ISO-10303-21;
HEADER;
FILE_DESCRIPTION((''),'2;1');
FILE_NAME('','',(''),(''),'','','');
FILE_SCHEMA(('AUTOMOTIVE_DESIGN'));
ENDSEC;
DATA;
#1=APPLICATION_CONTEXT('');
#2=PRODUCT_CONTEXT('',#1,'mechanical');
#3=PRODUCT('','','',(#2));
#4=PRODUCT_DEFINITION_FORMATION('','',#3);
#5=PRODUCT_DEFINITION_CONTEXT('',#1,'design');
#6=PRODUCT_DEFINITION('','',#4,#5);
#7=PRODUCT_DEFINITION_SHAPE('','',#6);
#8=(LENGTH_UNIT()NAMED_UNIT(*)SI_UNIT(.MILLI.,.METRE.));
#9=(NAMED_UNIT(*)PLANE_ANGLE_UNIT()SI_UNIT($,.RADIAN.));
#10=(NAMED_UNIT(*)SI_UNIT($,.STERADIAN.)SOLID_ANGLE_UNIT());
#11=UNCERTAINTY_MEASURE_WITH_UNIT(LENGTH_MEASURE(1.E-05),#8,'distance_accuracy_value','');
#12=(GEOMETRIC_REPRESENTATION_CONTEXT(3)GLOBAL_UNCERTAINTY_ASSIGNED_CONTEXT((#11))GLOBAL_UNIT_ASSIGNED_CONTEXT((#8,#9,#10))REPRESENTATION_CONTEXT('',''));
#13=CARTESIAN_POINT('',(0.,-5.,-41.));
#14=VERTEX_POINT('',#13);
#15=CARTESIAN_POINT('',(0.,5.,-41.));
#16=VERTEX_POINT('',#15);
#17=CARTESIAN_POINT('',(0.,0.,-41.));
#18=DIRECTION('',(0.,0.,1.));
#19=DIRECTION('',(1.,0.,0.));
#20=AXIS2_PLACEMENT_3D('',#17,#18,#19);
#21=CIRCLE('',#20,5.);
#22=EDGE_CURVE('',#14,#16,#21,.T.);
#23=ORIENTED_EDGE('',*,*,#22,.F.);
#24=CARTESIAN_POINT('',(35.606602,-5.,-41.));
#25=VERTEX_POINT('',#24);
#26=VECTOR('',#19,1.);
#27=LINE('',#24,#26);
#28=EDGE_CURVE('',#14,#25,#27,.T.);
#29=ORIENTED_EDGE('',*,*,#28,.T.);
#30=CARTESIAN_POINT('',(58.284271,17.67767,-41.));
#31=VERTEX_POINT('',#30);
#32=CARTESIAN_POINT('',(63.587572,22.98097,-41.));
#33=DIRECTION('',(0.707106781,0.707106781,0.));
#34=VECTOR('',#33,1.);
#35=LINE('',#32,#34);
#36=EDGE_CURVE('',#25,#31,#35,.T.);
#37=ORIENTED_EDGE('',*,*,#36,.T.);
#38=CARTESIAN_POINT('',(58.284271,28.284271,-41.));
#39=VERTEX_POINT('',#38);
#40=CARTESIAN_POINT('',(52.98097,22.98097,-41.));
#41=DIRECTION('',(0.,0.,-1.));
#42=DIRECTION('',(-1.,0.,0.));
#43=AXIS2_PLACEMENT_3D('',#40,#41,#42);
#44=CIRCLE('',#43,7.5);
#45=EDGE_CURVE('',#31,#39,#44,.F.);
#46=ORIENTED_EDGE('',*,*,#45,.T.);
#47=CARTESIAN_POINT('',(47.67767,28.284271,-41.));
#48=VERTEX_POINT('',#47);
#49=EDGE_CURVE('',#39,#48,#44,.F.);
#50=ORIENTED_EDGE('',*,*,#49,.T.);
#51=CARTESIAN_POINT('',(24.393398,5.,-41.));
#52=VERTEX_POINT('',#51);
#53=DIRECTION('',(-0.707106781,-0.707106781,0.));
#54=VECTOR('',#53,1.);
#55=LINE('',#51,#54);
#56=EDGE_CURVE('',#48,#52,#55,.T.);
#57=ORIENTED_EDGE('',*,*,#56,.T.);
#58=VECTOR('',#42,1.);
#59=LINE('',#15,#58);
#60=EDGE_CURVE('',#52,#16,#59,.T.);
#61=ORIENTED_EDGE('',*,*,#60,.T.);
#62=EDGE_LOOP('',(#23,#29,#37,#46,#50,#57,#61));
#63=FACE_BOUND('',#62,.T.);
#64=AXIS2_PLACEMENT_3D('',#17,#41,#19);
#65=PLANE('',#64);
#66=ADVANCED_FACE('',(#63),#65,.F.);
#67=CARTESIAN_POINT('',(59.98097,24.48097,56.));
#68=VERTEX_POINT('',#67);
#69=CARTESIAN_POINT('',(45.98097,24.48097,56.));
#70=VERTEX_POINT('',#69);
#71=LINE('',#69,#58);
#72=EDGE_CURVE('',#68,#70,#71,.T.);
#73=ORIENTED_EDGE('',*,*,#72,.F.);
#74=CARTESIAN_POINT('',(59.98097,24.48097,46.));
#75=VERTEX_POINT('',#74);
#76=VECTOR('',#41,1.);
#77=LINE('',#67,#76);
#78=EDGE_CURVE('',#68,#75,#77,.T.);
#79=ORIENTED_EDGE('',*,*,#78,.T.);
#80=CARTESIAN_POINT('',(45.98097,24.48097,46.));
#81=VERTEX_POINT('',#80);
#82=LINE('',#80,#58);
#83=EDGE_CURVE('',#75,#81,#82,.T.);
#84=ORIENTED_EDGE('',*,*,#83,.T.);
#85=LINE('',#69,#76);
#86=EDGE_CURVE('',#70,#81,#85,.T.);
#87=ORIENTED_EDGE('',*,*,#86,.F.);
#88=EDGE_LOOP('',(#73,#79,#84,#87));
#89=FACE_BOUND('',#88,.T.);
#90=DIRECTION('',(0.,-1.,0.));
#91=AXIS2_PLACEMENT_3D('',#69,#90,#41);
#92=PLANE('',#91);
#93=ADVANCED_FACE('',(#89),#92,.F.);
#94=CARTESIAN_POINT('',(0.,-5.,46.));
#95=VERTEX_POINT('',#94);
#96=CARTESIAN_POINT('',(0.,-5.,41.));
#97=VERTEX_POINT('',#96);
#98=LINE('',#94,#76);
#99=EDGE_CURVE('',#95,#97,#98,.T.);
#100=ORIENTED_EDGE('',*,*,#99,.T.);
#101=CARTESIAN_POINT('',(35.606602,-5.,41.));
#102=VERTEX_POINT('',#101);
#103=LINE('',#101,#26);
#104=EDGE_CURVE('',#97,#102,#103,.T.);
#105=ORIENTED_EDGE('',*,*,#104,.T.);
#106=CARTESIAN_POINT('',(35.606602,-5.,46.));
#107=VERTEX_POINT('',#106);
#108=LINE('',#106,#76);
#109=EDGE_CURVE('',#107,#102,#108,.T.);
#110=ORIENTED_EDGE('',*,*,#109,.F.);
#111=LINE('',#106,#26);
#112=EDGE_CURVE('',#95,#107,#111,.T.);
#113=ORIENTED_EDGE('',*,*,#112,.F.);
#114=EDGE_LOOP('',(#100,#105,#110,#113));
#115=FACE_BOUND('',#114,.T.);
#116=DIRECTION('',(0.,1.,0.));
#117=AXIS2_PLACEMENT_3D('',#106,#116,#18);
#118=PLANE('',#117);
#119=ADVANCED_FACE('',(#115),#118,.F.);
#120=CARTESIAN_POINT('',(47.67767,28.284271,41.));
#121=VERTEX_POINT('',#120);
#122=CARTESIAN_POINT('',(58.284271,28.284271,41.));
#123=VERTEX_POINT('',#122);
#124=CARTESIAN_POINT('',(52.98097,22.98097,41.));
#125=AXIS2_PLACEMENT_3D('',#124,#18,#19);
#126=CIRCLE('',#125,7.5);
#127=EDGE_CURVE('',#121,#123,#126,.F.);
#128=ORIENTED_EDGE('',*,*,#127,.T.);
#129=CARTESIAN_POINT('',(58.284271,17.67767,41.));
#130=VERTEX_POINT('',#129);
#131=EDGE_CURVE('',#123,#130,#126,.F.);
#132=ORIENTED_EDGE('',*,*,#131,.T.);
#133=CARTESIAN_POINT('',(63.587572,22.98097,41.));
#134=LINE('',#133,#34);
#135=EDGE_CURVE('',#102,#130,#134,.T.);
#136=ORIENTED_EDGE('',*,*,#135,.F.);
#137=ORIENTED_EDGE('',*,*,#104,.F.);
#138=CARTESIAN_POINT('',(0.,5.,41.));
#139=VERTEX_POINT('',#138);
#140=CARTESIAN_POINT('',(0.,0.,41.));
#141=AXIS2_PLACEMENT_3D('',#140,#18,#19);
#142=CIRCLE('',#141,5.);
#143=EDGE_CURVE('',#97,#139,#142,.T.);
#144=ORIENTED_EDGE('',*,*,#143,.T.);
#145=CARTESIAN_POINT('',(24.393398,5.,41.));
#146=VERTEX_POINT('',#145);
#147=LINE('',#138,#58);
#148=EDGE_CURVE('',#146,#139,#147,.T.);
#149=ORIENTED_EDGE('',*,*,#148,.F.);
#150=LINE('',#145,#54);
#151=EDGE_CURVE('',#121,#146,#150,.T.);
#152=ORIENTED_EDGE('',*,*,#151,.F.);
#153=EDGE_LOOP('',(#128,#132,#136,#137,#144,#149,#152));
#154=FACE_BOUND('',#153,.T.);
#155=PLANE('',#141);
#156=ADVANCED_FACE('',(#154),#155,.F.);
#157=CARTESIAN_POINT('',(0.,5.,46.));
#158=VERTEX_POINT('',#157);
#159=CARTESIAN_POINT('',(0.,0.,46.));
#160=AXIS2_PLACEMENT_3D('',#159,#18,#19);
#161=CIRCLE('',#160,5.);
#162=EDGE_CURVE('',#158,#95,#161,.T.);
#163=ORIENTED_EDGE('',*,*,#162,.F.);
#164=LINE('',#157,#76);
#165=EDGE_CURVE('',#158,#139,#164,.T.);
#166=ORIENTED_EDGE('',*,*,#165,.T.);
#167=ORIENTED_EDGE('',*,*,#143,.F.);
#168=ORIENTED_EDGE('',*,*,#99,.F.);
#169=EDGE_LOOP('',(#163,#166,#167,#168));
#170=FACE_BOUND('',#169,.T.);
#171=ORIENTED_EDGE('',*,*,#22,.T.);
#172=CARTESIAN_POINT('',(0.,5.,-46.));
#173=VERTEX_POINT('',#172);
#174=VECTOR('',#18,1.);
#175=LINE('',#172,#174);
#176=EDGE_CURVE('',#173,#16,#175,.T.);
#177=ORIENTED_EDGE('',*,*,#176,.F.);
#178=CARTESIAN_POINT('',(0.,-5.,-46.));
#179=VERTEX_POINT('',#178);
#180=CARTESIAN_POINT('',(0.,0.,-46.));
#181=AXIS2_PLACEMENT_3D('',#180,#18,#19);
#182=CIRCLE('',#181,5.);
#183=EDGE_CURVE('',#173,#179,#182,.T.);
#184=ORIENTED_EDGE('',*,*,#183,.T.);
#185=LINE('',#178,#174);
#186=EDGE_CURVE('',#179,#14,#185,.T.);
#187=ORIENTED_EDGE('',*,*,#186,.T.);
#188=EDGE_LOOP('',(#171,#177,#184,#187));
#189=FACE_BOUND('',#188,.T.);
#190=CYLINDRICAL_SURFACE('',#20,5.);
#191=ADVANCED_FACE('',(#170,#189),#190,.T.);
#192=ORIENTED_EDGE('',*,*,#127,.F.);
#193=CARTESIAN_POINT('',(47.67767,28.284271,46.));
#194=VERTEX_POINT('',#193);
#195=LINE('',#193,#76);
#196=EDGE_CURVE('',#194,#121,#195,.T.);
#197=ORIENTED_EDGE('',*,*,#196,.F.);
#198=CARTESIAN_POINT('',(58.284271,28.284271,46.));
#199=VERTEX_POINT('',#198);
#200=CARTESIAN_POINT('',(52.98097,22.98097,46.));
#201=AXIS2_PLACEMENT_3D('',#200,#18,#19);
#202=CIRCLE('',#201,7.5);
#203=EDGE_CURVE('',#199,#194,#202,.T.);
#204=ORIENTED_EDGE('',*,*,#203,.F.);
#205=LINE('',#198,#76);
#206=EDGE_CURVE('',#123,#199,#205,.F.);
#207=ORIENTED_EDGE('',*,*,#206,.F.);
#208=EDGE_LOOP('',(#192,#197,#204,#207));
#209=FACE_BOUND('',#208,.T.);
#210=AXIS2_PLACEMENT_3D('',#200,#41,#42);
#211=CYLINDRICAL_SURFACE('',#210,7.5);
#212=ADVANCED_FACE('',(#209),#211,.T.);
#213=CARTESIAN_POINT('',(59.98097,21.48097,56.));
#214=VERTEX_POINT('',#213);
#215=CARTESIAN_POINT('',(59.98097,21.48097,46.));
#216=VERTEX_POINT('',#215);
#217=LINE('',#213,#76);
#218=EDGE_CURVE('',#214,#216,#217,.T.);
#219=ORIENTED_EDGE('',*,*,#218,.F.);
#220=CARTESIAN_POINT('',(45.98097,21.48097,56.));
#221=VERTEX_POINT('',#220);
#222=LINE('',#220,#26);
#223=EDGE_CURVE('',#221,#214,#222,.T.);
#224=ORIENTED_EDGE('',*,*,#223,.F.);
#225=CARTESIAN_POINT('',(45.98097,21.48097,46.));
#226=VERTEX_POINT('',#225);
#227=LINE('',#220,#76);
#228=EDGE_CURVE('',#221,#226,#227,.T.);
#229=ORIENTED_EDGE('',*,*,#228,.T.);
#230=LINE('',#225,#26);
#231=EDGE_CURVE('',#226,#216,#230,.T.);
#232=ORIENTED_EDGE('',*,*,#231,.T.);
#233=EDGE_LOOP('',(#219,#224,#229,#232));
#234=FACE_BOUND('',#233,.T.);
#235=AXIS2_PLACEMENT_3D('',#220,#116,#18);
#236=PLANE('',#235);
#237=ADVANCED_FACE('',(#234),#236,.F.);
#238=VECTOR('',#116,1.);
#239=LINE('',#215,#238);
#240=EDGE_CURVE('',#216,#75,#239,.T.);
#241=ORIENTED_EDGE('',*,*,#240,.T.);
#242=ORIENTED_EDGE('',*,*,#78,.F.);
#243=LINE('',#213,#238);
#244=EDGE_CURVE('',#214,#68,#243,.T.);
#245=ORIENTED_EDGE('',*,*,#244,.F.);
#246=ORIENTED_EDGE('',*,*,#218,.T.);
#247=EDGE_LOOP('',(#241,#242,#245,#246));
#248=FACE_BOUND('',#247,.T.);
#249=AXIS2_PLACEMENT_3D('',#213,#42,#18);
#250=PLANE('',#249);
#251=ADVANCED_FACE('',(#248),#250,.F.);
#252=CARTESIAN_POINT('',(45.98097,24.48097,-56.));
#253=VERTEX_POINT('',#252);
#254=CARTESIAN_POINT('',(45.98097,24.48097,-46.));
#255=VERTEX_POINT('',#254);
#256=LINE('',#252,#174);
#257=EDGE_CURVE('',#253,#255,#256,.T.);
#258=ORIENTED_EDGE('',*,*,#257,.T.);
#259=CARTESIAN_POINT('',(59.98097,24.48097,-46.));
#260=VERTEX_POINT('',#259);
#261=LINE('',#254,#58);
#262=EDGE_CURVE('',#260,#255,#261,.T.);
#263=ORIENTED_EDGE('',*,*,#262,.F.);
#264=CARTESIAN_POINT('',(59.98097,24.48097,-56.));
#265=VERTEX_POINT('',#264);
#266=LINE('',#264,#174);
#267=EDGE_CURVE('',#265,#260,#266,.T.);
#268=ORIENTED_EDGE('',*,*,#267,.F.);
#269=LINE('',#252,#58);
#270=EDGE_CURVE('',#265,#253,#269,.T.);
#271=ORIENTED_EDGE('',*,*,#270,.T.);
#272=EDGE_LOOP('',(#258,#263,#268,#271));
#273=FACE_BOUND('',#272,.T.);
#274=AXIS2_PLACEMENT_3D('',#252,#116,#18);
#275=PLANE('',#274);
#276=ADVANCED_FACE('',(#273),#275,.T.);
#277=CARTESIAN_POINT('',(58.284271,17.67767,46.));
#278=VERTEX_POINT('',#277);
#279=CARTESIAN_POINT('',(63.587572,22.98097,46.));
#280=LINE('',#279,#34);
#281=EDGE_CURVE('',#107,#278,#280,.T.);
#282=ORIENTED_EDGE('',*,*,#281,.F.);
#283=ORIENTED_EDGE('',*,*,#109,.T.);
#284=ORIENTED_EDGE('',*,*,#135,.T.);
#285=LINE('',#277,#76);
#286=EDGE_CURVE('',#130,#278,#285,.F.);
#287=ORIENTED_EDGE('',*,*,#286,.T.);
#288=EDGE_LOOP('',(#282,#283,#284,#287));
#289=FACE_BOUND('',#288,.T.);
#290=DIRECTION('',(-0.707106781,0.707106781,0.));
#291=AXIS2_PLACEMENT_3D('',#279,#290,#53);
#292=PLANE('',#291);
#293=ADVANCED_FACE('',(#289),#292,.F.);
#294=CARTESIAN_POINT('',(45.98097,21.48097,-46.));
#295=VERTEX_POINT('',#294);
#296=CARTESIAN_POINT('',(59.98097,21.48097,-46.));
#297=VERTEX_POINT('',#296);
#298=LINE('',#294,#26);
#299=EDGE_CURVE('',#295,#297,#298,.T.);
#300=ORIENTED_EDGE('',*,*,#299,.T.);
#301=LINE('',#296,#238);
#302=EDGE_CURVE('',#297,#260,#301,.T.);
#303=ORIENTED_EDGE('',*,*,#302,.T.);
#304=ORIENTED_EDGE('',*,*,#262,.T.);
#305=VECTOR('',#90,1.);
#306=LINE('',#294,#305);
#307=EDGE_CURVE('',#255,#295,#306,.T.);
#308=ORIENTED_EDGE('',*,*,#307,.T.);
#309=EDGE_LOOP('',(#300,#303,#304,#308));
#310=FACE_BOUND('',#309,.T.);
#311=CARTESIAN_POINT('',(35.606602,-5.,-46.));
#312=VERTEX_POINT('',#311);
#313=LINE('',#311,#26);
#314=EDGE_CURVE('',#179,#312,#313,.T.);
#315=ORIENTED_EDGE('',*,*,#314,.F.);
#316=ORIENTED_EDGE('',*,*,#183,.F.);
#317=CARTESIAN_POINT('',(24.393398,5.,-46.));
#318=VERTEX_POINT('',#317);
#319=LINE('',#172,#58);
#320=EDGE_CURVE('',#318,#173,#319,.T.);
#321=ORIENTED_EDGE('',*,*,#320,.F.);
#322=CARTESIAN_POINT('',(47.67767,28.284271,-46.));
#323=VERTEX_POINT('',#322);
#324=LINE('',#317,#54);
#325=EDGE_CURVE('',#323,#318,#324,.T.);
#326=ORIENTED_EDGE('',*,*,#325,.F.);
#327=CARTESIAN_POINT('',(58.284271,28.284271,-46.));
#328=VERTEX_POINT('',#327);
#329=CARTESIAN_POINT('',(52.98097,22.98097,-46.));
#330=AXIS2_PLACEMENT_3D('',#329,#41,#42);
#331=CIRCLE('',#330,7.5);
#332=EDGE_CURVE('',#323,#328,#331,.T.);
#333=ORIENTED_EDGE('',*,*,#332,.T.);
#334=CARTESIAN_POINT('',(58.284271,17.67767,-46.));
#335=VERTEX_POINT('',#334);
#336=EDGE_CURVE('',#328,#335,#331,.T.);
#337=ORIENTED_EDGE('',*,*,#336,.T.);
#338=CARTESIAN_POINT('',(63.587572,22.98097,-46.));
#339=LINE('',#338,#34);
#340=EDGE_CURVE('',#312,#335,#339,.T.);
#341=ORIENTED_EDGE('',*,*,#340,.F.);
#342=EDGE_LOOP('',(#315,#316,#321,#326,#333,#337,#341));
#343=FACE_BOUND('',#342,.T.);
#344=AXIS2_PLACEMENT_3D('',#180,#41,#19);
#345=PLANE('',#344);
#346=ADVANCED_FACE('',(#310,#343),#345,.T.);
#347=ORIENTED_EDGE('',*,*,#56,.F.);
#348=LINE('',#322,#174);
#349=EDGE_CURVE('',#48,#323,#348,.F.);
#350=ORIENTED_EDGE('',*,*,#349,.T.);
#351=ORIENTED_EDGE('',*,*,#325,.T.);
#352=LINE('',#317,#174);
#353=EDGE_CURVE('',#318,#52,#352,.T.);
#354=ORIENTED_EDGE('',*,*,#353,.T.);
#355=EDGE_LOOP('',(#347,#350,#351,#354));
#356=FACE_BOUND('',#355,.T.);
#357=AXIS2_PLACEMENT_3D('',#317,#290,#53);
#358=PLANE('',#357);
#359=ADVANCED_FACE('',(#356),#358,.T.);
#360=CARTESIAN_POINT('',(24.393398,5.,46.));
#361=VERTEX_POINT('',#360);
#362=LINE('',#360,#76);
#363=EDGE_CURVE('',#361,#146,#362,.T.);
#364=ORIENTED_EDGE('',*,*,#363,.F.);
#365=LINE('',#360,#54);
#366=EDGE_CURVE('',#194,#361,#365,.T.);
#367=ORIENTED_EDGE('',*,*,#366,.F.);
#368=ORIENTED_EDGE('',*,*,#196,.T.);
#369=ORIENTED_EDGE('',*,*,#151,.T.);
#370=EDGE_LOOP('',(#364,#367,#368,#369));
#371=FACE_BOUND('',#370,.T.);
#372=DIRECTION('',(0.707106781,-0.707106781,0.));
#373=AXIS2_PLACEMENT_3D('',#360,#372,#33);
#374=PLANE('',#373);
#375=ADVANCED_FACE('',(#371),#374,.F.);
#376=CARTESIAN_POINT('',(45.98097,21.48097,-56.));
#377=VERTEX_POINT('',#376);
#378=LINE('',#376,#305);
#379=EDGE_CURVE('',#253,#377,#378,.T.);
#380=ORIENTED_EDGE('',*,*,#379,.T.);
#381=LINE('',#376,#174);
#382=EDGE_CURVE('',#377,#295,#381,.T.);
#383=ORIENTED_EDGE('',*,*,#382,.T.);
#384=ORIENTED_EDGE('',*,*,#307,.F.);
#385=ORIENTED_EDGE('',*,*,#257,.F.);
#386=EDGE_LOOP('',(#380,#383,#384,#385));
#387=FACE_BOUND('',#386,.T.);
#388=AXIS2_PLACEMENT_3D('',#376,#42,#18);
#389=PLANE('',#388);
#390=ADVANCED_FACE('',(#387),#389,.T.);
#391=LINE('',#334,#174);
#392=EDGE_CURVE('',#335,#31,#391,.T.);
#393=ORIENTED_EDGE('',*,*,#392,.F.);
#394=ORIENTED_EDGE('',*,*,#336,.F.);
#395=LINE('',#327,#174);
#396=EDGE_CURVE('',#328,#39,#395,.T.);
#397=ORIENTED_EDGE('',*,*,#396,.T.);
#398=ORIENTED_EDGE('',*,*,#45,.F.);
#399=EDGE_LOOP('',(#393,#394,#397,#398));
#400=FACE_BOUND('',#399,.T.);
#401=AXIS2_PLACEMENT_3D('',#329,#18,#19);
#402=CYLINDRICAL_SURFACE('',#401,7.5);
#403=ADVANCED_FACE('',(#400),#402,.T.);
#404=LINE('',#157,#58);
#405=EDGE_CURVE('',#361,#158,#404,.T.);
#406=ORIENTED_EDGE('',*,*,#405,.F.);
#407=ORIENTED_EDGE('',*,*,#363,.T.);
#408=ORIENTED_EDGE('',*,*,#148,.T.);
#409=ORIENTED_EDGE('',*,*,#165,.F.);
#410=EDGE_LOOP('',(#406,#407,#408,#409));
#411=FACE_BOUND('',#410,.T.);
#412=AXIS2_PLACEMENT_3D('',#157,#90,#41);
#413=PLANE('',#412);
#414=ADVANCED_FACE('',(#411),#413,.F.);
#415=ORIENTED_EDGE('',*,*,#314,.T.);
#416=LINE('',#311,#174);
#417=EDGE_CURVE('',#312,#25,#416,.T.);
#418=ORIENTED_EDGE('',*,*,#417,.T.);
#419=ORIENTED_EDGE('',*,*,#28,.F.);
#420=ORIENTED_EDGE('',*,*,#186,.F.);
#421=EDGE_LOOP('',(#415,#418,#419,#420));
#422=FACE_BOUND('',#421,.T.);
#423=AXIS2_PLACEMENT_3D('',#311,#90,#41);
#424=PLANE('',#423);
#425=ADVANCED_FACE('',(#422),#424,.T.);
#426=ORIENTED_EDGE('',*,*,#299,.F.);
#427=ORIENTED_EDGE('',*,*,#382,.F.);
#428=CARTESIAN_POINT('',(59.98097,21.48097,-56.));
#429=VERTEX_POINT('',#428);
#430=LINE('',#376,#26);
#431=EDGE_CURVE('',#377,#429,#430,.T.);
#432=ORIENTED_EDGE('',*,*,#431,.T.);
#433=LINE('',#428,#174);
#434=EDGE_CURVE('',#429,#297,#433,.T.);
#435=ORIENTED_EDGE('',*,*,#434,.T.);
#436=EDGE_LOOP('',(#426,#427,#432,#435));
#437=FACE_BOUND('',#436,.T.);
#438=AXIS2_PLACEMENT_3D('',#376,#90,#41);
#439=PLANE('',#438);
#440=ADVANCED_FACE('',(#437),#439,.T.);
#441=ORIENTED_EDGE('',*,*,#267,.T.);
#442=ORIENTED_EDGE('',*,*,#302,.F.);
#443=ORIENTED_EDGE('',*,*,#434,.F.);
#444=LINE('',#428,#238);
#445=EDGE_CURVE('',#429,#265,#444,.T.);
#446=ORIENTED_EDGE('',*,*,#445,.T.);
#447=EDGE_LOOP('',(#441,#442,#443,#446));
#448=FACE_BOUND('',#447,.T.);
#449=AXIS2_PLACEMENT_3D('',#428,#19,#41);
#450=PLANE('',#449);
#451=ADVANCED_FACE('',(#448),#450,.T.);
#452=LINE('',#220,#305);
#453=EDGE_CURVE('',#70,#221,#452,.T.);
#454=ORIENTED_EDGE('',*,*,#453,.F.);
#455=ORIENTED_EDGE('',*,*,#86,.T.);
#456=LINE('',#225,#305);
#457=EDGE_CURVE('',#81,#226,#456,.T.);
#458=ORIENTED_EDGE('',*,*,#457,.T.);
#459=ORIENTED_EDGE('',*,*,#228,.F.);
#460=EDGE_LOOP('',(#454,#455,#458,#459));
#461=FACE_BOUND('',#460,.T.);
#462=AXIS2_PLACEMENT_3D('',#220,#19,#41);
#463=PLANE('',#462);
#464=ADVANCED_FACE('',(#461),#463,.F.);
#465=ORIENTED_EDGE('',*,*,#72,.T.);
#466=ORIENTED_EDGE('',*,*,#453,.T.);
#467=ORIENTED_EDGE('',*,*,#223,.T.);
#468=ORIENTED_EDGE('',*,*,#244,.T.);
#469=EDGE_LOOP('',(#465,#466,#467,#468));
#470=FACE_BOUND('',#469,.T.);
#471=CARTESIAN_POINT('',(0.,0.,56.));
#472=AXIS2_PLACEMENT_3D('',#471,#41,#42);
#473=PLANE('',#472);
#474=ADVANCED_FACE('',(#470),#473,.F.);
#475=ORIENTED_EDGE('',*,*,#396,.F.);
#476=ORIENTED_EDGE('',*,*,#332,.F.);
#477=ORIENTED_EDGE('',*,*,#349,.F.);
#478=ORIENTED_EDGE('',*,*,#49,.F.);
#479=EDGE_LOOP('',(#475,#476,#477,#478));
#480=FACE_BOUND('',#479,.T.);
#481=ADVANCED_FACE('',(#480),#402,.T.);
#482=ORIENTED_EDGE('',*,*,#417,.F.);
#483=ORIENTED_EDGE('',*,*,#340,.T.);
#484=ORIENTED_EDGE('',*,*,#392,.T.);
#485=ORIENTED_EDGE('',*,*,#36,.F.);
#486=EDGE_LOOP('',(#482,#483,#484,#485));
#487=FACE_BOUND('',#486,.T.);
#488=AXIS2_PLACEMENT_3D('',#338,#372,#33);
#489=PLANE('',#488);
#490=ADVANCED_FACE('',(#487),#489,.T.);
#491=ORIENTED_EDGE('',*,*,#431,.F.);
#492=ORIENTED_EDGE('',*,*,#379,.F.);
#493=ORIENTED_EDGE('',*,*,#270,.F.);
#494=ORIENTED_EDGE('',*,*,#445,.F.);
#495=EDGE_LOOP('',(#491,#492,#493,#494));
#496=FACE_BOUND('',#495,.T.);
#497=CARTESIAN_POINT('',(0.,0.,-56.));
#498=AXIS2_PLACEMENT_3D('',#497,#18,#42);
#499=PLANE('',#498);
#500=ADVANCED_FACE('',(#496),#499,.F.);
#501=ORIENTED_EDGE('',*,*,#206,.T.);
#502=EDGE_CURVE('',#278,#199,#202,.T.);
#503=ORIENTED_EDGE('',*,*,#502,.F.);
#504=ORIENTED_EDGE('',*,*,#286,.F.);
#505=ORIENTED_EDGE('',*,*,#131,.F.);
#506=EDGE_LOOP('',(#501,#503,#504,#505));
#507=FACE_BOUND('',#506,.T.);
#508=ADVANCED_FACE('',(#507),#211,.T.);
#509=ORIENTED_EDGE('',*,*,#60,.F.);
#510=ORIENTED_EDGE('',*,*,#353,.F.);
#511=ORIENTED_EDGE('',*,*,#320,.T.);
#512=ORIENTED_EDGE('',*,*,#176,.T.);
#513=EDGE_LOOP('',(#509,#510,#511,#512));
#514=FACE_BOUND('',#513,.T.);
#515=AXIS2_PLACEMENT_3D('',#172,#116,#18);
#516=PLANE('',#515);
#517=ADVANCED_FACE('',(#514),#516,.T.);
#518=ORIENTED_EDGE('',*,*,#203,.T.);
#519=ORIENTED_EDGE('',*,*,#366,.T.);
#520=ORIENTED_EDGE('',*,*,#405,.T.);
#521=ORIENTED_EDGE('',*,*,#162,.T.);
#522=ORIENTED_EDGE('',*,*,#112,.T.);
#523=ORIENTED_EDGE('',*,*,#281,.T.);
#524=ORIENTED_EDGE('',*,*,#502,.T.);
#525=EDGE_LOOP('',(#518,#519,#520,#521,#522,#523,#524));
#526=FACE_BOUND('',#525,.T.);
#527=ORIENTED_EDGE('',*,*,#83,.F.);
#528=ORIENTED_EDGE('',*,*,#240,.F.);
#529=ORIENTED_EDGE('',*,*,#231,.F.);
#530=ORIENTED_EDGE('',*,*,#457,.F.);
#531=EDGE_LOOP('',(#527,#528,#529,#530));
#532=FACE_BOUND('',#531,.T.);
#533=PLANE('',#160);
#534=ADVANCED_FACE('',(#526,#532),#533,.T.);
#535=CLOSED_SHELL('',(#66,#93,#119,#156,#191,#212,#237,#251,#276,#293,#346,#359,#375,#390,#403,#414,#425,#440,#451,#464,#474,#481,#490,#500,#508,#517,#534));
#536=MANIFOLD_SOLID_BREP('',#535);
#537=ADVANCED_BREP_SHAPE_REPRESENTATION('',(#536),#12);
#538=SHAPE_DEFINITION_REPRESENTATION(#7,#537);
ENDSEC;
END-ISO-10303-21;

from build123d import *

# Parameters (mm, degrees)
EXTRUDE_1_DEPTH        = 41
EXTRUDE_1_DEPTH_BACK   = 41
SKETCH_1_R             = 5
EXTRUDE_2_DEPTH        = 5
FILLET_1_R             = 7.5
FILLET_1_OF_MIRROR_1_R = 7.5
SKETCH_3_W             = 14
SKETCH_3_H             = 3
EXTRUDE_3_DEPTH        = 10


with BuildPart() as part:
    # 草图1 → 凸台-拉伸1 (new, two sides: drawn at the far end of the back side and taken through both)
    with BuildSketch(Plane.XY.offset(-EXTRUDE_1_DEPTH_BACK)):
        Circle(SKETCH_1_R)
    extrude(amount=EXTRUDE_1_DEPTH + EXTRUDE_1_DEPTH_BACK)

    # 草图2 → 凸台-拉伸2 (add)
    with BuildSketch(Plane.XY.offset(41)):
        with BuildLine():
            Line((0, 5), (24.393398282, 5))
            Line((24.393398282, 5), (52.980970389, 33.587572106))
            Line((52.980970389, 33.587572106), (63.587572106, 22.980970389))
            Line((63.587572106, 22.980970389), (35.606601718, -5))
            Line((35.606601718, -5), (0, -5))
            ThreePointArc((0, -5), (-5, 0), (0, 5))
        make_face()
    extrude_2 = extrude(amount=EXTRUDE_2_DEPTH)

    # 圆角1
    fillet_1_edges = [part.edges().sort_by_distance(p)[0] for p in [
        (63.587572106, 22.980970389, 43.5),
        (52.980970389, 33.587572106, 43.5),
    ]]
    fillet(fillet_1_edges, radius=FILLET_1_R - 0.0001)  # a hair under: the kernel refuses the full size

    # 镜向1: 凸台-拉伸2 across plane
    add(extrude_2.mirror(Plane.XY))

    # 圆角1 of 镜向1
    fillet_1_of_mirror_1_edges = [part.edges().sort_by_distance(p)[0] for p in [
        (63.587572106, 22.980970389, -43.5),
        (52.980970389, 33.587572106, -43.5),
    ]]
    fillet(fillet_1_of_mirror_1_edges, radius=FILLET_1_OF_MIRROR_1_R - 0.0001)  # a hair under: the kernel refuses the full size

    # 草图3 → 凸台-拉伸3 (add)
    with BuildSketch(Plane.XY.offset(46)):
        with Locations((52.980970389, 22.980970389)):
            Rectangle(SKETCH_3_W, SKETCH_3_H)
    extrude_3 = extrude(amount=EXTRUDE_3_DEPTH)

    # 镜向2: 凸台-拉伸3 across plane
    add(extrude_3.mirror(Plane.XY))


solid = part.part
